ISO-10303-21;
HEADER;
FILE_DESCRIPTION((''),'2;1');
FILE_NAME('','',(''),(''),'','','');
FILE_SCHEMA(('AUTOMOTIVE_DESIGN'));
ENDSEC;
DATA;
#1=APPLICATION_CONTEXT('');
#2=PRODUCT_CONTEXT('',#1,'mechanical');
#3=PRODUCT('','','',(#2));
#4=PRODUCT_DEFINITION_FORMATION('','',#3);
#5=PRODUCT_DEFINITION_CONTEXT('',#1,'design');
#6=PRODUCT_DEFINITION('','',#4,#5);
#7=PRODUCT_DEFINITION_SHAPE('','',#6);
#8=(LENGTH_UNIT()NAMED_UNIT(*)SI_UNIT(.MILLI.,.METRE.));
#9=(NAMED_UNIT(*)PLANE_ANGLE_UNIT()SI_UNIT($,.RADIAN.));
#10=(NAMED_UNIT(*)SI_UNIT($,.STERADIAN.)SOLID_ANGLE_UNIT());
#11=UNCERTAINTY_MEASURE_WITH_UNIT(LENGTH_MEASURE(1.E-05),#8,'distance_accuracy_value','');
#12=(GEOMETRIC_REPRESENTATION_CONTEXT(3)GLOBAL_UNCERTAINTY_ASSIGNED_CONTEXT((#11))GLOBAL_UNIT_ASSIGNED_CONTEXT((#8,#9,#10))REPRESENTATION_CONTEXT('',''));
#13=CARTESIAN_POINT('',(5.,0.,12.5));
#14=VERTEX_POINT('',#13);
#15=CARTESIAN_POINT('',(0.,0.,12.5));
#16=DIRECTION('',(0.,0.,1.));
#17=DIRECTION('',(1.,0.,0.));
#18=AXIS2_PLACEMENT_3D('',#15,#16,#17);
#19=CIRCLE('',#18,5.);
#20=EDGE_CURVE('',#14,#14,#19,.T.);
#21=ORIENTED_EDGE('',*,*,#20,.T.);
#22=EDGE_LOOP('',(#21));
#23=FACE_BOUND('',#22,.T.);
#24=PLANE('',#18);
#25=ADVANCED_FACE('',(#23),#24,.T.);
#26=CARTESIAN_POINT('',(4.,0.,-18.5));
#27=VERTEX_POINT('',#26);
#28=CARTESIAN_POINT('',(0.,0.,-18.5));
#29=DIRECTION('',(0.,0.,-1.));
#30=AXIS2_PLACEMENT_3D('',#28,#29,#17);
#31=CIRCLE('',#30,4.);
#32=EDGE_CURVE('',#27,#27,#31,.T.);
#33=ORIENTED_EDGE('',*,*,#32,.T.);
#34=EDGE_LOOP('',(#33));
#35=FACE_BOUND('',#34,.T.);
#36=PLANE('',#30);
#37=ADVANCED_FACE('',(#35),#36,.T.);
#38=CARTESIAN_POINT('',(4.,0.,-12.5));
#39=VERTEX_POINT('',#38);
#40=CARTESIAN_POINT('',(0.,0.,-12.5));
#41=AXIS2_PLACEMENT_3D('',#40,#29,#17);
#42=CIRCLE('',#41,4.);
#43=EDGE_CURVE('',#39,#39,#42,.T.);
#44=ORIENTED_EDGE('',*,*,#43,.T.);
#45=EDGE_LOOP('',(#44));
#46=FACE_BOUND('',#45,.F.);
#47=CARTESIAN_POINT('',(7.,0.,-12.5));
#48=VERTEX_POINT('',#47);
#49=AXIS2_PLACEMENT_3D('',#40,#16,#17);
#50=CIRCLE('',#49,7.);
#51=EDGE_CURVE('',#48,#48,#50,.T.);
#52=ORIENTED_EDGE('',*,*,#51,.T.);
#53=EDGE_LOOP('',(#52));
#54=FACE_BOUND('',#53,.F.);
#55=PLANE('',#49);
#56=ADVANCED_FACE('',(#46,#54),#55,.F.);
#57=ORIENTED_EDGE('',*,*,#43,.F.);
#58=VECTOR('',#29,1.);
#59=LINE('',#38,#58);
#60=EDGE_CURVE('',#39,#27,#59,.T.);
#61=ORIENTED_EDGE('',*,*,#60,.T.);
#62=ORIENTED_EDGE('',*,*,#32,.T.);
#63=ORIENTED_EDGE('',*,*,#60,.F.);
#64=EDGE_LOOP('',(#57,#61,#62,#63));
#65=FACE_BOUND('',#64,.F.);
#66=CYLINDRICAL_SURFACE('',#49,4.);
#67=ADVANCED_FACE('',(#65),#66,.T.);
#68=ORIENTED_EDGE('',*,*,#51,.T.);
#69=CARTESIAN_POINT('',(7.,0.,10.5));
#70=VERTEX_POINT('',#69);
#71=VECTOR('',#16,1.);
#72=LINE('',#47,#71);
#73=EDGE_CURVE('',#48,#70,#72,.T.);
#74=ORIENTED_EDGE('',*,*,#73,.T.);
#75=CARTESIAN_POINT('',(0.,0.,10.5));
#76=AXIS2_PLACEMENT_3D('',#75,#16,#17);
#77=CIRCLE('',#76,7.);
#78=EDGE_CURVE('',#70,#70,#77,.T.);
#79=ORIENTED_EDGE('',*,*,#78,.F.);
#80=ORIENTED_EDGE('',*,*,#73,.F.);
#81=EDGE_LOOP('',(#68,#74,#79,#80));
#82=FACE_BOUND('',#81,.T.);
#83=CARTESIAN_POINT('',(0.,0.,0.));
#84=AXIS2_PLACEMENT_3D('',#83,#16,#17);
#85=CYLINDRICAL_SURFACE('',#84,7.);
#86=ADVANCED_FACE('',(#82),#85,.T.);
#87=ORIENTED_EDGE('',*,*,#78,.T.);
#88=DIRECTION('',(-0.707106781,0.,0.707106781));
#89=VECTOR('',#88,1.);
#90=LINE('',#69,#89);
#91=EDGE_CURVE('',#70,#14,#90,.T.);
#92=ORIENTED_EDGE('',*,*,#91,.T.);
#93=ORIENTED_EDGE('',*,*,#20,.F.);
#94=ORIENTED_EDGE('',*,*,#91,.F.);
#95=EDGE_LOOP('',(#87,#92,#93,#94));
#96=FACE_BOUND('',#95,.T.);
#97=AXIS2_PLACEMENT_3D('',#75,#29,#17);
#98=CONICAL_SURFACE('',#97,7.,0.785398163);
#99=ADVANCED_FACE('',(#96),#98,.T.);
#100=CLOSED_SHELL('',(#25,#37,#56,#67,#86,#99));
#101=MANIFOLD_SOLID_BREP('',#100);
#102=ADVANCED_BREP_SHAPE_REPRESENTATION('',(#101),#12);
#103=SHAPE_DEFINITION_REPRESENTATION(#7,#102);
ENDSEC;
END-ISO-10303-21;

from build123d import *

# Parameters (mm, degrees)
F0_R     = 7
F1_DEPTH = 12.5
F2_SIZE  = 2
F3_R     = 4
F4_DEPTH = 6


with BuildPart() as f1:
    # F0 (on Top) → F1 (new body, symmetric)
    with BuildSketch(Plane.XY):
        Circle(F0_R)
    extrude(amount=F1_DEPTH, both=True)

    # F2
    f2_edges = [f1.edges().sort_by_distance(p)[0] for p in [
        (-7, 0, 12.5),
    ]]
    chamfer(f2_edges, length=F2_SIZE)

    # F3 (on face) → F4 (join)
    with BuildSketch(Plane(origin=(0, 0, -12.5), x_dir=(1, 0, 0), z_dir=(0, 0, -1))):
        Circle(F3_R)
    extrude(amount=F4_DEPTH)


solid = f1.part
